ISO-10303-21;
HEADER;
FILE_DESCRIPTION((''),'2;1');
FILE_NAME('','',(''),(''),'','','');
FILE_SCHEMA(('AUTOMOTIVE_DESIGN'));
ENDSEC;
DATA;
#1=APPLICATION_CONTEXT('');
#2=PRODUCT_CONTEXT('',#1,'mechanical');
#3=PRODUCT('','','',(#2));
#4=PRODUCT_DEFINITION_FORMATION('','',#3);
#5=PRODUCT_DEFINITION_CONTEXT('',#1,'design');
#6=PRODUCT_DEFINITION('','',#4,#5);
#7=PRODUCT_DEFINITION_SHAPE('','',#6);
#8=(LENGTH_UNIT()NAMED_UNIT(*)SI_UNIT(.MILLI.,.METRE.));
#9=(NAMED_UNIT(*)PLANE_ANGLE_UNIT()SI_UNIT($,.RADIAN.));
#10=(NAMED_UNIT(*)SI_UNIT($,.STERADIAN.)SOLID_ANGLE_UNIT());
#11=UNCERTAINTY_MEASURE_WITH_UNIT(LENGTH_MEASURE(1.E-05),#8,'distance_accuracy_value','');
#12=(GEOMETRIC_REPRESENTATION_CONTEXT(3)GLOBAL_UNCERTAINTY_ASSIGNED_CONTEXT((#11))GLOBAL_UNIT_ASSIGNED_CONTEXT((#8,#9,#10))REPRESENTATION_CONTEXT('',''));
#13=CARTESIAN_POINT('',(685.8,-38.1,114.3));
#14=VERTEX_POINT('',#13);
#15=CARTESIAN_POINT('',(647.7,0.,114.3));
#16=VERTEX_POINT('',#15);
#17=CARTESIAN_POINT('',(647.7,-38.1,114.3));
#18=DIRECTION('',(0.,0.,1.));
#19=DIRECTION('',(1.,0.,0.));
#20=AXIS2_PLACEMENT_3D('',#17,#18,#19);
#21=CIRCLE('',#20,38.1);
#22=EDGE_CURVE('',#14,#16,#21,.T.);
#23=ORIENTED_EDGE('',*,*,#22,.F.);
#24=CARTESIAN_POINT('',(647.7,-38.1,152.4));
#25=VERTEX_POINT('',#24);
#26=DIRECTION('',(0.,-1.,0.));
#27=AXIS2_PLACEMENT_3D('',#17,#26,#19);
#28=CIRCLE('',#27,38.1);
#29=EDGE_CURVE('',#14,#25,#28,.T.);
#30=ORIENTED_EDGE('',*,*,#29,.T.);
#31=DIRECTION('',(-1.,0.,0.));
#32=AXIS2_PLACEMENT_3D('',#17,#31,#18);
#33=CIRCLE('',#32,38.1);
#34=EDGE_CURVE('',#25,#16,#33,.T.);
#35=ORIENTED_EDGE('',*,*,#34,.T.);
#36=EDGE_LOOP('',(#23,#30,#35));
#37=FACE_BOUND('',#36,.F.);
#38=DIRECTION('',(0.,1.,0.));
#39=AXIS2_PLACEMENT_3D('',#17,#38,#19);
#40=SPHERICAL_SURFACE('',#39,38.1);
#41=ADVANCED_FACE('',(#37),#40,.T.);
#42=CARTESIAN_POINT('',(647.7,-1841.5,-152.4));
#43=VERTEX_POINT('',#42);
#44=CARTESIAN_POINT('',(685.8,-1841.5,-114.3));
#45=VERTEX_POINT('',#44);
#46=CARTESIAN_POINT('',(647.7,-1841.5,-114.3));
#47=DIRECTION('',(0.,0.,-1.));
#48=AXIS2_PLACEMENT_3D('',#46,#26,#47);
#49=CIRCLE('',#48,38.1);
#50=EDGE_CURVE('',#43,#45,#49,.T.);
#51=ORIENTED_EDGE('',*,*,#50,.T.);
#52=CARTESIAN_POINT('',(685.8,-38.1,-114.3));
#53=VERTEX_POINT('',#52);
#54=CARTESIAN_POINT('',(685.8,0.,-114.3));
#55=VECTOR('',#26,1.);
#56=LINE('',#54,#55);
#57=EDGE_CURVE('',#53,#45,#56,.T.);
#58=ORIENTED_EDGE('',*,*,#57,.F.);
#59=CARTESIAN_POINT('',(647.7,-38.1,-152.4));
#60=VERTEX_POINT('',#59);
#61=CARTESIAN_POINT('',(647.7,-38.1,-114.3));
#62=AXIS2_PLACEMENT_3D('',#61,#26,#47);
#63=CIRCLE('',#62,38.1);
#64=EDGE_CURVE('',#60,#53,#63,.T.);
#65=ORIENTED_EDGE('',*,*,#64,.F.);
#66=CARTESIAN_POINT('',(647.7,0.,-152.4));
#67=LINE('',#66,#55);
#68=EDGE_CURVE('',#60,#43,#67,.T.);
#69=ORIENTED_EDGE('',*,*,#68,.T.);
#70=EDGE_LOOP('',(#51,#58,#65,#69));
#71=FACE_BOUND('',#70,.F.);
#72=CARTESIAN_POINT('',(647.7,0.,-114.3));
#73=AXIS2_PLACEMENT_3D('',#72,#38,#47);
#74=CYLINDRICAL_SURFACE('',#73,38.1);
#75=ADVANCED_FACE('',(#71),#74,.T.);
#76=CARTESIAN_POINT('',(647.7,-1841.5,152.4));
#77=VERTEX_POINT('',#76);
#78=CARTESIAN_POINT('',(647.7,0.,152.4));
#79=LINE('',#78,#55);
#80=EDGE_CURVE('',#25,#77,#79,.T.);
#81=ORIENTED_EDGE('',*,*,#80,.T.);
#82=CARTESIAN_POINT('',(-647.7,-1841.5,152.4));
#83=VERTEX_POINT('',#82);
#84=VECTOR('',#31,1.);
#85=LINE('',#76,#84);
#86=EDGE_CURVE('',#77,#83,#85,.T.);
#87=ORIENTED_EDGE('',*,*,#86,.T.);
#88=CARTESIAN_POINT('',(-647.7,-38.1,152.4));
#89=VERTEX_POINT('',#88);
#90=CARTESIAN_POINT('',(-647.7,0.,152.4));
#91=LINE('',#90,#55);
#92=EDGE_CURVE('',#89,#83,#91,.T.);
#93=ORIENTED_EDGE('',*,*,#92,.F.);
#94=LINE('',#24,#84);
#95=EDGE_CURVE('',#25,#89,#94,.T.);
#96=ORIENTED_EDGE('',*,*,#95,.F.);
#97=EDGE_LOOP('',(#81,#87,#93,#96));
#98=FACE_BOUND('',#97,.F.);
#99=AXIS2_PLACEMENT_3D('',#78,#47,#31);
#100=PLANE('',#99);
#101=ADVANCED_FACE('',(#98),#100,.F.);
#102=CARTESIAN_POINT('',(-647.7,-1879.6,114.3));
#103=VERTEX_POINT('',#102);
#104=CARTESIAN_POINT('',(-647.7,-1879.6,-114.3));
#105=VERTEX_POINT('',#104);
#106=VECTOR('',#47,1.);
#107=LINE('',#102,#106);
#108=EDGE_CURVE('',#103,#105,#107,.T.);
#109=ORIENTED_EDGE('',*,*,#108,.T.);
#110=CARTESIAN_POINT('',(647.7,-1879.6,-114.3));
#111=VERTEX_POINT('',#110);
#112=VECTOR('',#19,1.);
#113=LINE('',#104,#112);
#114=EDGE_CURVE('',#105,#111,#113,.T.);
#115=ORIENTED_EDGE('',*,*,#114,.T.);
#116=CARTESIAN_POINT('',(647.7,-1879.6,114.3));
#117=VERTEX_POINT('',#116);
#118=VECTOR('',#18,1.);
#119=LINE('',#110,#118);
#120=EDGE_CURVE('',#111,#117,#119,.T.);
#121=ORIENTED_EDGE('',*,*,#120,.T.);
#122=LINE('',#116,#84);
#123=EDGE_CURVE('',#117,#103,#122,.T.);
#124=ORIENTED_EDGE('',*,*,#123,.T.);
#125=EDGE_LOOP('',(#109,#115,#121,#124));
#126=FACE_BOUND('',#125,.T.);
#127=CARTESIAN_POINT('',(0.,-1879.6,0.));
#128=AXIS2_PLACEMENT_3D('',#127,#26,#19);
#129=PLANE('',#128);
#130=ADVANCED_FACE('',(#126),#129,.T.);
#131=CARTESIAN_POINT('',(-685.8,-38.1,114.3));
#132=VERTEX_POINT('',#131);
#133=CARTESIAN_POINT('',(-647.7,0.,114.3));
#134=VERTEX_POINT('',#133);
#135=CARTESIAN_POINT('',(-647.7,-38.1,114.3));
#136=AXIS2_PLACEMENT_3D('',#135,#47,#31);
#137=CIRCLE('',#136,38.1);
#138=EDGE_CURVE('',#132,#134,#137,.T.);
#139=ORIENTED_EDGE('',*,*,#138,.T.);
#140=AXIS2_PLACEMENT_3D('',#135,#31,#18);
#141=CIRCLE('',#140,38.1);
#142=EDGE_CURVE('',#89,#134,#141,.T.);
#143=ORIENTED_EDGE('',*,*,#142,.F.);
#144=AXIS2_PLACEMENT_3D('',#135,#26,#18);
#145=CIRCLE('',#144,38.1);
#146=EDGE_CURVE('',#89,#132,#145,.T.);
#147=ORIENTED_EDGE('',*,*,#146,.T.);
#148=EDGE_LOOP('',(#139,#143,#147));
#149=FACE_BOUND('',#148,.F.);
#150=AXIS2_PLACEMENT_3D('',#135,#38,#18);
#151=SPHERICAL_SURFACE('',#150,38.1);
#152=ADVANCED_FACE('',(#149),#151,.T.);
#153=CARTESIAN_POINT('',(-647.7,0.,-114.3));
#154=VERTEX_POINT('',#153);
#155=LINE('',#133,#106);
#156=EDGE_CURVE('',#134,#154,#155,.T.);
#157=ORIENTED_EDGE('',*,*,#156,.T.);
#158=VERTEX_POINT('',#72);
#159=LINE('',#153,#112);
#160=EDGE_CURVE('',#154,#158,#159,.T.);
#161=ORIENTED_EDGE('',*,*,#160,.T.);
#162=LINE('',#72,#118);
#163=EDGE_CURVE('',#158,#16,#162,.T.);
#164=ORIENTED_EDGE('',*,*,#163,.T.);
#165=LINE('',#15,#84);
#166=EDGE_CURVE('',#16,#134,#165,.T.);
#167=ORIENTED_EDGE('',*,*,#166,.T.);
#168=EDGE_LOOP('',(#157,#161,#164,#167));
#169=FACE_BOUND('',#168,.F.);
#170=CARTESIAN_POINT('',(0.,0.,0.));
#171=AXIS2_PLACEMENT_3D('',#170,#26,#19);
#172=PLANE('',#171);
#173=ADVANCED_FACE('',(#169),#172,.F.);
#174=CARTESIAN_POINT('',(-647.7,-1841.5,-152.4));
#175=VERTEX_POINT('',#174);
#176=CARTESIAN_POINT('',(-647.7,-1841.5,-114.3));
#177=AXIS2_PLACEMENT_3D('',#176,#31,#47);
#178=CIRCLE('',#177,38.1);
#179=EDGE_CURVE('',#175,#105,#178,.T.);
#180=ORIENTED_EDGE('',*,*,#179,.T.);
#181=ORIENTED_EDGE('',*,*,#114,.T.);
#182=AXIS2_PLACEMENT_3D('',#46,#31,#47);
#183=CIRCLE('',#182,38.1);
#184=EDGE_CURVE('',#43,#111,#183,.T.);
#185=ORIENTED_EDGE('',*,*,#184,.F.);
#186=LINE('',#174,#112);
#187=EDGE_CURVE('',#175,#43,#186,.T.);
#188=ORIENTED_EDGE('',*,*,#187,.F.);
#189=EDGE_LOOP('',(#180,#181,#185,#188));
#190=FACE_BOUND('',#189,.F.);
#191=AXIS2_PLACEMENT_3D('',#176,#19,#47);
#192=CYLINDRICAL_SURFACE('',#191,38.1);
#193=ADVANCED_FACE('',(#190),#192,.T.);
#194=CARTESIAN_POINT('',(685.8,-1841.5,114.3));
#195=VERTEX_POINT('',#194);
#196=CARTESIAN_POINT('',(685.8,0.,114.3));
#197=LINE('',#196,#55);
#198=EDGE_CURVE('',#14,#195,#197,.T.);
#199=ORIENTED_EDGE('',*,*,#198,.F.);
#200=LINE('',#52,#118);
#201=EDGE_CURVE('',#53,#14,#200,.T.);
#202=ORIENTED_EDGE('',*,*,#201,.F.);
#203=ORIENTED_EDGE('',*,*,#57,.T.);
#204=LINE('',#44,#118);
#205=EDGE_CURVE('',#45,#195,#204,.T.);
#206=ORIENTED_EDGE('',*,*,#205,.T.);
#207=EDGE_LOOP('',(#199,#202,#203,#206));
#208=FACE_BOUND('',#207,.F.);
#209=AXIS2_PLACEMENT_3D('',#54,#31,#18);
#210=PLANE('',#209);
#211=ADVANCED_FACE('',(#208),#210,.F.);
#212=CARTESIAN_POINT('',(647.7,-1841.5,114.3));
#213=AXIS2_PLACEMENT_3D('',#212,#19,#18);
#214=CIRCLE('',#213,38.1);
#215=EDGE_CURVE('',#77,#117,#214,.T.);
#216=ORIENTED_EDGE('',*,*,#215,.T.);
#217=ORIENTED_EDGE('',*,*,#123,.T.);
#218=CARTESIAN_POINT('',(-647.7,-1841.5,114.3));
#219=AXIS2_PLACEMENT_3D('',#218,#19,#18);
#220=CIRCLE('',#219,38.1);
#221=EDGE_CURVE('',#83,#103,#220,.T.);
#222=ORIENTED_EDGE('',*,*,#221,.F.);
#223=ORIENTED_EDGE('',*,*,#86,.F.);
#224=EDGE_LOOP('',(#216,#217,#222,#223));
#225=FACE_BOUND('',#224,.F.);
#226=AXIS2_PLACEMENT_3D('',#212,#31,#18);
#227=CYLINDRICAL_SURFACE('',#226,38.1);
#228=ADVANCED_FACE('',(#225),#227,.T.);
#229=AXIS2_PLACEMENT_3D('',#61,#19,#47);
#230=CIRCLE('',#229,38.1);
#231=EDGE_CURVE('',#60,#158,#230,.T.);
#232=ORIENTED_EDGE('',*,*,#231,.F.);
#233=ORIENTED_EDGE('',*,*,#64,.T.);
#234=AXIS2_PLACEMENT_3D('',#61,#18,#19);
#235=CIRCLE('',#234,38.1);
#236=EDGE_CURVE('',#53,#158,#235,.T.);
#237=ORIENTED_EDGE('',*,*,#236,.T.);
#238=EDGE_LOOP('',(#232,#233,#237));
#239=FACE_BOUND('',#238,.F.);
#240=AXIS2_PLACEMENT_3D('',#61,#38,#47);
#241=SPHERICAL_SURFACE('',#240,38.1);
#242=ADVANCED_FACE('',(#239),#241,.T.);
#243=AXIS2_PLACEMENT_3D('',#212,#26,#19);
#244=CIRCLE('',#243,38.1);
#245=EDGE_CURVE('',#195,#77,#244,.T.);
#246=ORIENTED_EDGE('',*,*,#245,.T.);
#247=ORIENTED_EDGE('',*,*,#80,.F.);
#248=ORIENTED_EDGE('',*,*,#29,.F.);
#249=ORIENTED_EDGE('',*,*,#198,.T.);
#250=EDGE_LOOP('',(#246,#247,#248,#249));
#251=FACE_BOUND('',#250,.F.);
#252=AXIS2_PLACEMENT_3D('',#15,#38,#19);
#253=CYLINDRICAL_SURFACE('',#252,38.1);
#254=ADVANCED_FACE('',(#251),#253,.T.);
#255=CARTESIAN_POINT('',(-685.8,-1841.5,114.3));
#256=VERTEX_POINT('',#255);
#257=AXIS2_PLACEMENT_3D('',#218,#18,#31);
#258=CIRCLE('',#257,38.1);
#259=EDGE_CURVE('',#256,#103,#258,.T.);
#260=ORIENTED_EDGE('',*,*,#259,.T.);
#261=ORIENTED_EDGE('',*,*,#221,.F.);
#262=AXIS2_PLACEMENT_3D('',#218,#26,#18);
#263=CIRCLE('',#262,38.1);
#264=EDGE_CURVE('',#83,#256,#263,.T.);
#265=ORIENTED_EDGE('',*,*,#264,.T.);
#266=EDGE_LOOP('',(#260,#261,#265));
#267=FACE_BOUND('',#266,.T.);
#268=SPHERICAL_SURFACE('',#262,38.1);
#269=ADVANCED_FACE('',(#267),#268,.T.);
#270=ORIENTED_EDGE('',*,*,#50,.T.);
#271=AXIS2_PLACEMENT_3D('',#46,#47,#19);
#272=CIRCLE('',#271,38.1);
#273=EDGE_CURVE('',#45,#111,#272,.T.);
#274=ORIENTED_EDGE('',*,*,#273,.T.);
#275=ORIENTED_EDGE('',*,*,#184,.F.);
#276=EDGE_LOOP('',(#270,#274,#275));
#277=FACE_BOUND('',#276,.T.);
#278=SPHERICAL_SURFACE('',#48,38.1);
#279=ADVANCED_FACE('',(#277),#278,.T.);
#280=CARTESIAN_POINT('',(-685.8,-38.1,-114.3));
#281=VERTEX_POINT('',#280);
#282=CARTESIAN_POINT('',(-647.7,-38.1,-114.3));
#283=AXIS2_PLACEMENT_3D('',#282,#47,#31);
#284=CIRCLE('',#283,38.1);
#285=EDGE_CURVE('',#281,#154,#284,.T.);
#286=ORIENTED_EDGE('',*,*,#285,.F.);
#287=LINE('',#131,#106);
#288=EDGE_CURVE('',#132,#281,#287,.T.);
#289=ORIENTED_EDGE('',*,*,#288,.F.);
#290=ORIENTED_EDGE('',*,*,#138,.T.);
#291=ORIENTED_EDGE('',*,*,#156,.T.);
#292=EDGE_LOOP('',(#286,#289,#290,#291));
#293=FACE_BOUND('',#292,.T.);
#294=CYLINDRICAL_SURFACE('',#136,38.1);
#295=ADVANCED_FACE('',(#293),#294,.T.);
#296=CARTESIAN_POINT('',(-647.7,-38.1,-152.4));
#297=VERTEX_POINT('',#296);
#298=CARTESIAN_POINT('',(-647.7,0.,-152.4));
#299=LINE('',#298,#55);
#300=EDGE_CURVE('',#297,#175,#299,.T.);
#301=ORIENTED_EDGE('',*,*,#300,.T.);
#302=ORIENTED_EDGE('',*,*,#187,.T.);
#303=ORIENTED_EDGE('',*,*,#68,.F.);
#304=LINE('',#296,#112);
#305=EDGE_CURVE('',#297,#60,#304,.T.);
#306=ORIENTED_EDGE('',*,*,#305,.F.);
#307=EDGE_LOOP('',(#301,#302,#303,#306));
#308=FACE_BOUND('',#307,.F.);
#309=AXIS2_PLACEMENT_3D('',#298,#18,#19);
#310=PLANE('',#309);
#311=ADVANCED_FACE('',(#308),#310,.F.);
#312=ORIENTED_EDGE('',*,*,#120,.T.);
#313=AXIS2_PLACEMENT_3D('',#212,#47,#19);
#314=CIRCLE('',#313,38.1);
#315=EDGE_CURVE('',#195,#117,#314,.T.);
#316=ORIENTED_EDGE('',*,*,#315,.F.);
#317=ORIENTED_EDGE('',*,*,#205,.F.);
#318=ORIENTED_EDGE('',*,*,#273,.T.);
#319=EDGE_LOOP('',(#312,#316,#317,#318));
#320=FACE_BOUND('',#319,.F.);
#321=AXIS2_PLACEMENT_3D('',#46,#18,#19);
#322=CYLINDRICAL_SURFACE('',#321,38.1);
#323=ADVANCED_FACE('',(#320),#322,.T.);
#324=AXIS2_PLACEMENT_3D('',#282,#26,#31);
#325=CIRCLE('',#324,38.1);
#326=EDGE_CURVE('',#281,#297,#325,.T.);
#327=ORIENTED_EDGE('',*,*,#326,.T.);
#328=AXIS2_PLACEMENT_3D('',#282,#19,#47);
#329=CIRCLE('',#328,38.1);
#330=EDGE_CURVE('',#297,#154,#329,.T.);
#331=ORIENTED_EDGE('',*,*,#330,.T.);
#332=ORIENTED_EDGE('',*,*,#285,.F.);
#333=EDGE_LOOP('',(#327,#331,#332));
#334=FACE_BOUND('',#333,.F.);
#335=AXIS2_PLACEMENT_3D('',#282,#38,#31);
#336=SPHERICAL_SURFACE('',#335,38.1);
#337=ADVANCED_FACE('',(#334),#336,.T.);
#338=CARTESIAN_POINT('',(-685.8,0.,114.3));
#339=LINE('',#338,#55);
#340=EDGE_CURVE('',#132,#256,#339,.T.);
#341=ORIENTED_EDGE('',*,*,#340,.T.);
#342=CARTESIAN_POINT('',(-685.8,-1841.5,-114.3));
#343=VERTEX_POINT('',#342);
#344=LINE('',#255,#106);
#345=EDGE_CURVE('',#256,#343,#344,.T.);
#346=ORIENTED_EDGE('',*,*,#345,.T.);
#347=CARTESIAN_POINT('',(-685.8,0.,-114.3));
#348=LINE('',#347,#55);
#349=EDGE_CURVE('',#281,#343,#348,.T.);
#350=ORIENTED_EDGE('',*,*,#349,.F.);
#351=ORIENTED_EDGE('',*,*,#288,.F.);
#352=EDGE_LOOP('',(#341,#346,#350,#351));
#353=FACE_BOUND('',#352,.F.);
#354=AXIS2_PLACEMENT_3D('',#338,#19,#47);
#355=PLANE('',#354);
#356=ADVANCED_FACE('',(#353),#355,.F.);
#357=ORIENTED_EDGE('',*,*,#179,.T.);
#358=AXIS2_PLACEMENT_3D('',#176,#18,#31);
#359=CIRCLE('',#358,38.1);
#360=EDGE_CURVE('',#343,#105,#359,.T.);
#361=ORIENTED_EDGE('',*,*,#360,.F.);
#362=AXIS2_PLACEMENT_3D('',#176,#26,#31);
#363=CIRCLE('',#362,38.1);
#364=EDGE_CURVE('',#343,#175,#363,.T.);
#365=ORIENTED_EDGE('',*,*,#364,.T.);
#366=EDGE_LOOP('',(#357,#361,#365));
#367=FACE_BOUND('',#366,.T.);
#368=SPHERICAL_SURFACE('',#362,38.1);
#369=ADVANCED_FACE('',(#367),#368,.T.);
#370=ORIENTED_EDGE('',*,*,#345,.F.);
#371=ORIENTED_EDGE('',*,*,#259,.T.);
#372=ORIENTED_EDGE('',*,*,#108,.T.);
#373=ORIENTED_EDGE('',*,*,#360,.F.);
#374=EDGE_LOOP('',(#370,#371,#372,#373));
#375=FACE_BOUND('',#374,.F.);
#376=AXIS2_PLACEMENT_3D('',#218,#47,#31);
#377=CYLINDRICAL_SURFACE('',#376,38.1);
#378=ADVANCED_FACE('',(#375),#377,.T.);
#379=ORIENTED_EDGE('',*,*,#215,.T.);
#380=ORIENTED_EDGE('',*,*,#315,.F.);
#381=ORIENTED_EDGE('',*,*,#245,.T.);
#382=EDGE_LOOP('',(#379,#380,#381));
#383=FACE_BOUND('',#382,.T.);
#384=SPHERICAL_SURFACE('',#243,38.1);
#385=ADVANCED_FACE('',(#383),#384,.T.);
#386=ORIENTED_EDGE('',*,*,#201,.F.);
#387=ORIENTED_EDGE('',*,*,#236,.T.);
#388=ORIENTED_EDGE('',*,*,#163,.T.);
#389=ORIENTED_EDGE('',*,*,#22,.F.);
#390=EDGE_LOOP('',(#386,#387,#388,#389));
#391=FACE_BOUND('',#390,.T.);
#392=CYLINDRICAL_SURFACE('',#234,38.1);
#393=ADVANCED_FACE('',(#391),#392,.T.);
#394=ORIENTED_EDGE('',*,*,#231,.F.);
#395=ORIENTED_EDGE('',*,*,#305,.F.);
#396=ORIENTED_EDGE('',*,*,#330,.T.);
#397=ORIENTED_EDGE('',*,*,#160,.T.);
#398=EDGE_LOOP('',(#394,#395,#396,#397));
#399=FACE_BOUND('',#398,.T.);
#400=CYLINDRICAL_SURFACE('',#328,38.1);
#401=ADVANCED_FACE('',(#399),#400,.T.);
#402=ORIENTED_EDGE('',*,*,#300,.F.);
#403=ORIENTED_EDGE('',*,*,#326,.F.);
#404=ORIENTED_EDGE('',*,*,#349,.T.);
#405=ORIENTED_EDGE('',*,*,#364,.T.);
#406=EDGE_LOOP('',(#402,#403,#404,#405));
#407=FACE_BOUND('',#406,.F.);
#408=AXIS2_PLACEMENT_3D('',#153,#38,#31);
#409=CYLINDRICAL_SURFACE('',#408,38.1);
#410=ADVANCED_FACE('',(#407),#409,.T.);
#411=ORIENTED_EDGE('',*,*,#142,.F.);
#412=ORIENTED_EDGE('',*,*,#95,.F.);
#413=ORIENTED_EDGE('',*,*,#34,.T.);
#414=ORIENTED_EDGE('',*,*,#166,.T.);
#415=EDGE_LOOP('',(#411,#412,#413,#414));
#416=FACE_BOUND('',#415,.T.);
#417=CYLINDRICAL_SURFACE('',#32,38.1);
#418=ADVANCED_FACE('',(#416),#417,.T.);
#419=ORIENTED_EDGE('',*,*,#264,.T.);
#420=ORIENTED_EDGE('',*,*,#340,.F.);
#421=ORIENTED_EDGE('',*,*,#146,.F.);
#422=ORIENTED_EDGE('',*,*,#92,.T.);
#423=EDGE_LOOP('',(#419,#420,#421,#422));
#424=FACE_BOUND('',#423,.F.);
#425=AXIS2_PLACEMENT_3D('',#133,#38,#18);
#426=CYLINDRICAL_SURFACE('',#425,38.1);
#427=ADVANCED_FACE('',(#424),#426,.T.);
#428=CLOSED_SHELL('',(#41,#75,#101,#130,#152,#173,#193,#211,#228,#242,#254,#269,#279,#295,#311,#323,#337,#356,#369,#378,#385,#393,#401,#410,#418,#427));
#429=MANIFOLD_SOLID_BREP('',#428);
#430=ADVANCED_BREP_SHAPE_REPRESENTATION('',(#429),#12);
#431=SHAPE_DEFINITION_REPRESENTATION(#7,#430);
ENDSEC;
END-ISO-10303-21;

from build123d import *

# Parameters (mm, degrees)
F1_DEPTH = 1879.6
F2_R     = 38.1


with BuildPart() as f1:
    # F0 (on Front) → F1 (new body)
    with BuildSketch(Plane.XZ):
        with BuildLine():
            Line((-647.7, -152.4), (647.7, -152.4))
            ThreePointArc((647.7, -152.4), (674.6407683632, -141.2407683632), (685.8, -114.3))
            Line((685.8, -114.3), (685.8, 114.3))
            ThreePointArc((685.8, 114.3), (674.6407683632, 141.2407683632), (647.7, 152.4))
            Line((647.7, 152.4), (-647.7, 152.4))
            ThreePointArc((-647.7, 152.4), (-674.6407683632, 141.2407683632), (-685.8, 114.3))
            Line((-685.8, 114.3), (-685.8, -114.3))
            ThreePointArc((-685.8, -114.3), (-674.6407683632, -141.2407683632), (-647.7, -152.4))
        make_face()
    extrude(amount=F1_DEPTH)

    # F2
    f2_edges = [f1.edges().sort_by_distance(p)[0] for p in [
        (685.8, -1879.6, 0),
        (647.7, -939.8, 152.4),
        (685.8, 0, 0),
    ]]
    fillet(f2_edges, radius=F2_R)


solid = f1.part
